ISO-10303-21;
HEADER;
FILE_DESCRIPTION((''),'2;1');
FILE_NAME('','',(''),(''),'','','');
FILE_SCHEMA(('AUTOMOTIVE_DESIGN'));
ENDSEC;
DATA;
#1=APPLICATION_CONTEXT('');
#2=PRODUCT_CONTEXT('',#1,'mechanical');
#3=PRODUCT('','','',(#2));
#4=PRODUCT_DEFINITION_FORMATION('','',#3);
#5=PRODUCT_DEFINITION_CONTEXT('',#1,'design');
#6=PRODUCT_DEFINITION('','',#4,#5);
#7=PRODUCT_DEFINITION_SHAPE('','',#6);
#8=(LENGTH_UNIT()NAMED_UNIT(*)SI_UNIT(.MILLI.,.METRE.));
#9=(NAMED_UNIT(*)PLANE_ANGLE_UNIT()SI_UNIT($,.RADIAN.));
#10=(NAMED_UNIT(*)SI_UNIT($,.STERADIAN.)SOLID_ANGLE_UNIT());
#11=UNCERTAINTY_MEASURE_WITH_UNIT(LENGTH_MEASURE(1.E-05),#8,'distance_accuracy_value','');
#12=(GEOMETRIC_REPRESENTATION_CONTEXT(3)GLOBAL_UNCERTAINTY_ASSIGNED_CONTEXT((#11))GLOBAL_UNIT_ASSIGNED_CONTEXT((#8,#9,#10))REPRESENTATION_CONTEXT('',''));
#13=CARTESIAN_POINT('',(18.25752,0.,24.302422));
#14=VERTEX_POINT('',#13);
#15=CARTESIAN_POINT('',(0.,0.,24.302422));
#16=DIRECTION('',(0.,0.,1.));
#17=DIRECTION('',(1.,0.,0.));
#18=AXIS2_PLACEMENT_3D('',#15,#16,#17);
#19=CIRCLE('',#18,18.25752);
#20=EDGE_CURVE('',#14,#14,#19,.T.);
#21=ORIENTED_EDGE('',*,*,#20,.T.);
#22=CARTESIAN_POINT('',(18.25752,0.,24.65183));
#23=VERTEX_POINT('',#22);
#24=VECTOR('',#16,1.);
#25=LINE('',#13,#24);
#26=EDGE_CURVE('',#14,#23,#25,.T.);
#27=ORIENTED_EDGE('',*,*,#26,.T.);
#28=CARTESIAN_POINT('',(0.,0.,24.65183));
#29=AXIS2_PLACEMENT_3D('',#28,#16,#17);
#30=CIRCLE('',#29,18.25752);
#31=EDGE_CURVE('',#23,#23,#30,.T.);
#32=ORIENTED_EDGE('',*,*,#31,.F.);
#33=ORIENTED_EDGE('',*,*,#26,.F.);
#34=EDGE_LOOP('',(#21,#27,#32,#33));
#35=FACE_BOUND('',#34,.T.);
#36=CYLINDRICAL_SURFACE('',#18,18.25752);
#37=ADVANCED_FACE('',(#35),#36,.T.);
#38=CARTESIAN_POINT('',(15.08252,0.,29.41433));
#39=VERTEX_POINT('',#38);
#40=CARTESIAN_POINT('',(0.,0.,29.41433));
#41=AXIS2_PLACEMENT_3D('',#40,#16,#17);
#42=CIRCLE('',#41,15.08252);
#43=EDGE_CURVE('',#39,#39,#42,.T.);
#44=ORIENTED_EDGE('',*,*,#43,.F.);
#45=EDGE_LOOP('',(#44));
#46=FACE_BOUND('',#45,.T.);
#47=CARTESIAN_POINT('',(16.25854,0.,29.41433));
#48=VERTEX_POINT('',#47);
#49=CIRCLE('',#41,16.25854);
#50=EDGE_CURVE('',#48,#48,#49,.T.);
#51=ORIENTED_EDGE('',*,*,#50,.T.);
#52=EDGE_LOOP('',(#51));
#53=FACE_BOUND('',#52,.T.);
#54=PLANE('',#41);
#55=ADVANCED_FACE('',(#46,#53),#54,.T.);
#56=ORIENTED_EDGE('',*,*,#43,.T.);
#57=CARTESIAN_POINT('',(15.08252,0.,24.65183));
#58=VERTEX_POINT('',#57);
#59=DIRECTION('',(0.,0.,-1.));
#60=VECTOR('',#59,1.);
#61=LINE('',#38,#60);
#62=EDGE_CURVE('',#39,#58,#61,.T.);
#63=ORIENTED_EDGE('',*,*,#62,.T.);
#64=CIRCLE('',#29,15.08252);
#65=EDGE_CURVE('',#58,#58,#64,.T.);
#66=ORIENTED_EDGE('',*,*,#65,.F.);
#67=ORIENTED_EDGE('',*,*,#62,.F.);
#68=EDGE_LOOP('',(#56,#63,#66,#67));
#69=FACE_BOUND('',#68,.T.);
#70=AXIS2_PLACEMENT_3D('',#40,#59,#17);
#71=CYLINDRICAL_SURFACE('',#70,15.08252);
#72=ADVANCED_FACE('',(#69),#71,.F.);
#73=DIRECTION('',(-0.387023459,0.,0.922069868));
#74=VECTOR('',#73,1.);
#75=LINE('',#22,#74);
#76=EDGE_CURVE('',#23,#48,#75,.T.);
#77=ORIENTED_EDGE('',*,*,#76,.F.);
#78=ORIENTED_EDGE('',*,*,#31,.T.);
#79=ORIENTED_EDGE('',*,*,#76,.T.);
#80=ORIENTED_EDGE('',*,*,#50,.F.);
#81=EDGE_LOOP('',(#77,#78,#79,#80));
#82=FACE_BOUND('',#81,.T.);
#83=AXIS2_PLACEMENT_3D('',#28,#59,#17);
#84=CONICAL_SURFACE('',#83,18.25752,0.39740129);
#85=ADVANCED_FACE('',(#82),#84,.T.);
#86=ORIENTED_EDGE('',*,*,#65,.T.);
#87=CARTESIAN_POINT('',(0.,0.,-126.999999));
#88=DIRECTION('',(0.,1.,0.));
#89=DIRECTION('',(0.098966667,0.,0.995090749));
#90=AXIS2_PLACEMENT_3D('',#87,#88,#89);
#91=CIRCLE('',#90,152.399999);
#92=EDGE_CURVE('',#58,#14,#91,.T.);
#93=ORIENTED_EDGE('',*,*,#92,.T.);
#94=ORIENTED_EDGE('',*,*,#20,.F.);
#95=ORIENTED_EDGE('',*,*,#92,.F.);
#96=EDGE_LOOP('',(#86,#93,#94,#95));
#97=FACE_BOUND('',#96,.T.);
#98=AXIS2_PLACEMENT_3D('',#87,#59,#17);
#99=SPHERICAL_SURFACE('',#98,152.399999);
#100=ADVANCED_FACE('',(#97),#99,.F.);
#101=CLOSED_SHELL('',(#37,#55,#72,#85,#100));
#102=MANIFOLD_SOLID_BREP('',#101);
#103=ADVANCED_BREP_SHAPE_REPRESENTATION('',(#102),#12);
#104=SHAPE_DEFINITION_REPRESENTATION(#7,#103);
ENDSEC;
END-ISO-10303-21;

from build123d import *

# Parameters (mm, degrees)
F2_SIZE2 = 1.99898
F2_SIZE  = 4.7625


# Not quite as in the source:
# - a feature of the source that left no trace in its solid (it failed there, or was rolled back) is left out


with BuildPart() as f1:
    # F0 (on Front) → F1 (revolve)
    with BuildSketch(Plane.XZ):
        with BuildLine():
            ThreePointArc((15.08252, 24.6518301586), (16.6709354351, 24.485444554), (18.25752, 24.3024221995))
            Line((18.25752, 24.3024221995), (18.25752, 29.4143301586))
            Line((18.25752, 29.4143301586), (15.08252, 29.4143301586))
            Line((15.08252, 29.4143301586), (15.08252, 24.6518301586))
        make_face()
    revolve(axis=Axis((0, 0, 31.4977962196), (0, 0, 1)))

    # F2
    f2_edges = [f1.edges().sort_by_distance(p)[0] for p in [
        (-18.25752, 0, 29.41433),
    ]]
    chamfer(f2_edges, length=F2_SIZE, length2=F2_SIZE2)


solid = f1.part
